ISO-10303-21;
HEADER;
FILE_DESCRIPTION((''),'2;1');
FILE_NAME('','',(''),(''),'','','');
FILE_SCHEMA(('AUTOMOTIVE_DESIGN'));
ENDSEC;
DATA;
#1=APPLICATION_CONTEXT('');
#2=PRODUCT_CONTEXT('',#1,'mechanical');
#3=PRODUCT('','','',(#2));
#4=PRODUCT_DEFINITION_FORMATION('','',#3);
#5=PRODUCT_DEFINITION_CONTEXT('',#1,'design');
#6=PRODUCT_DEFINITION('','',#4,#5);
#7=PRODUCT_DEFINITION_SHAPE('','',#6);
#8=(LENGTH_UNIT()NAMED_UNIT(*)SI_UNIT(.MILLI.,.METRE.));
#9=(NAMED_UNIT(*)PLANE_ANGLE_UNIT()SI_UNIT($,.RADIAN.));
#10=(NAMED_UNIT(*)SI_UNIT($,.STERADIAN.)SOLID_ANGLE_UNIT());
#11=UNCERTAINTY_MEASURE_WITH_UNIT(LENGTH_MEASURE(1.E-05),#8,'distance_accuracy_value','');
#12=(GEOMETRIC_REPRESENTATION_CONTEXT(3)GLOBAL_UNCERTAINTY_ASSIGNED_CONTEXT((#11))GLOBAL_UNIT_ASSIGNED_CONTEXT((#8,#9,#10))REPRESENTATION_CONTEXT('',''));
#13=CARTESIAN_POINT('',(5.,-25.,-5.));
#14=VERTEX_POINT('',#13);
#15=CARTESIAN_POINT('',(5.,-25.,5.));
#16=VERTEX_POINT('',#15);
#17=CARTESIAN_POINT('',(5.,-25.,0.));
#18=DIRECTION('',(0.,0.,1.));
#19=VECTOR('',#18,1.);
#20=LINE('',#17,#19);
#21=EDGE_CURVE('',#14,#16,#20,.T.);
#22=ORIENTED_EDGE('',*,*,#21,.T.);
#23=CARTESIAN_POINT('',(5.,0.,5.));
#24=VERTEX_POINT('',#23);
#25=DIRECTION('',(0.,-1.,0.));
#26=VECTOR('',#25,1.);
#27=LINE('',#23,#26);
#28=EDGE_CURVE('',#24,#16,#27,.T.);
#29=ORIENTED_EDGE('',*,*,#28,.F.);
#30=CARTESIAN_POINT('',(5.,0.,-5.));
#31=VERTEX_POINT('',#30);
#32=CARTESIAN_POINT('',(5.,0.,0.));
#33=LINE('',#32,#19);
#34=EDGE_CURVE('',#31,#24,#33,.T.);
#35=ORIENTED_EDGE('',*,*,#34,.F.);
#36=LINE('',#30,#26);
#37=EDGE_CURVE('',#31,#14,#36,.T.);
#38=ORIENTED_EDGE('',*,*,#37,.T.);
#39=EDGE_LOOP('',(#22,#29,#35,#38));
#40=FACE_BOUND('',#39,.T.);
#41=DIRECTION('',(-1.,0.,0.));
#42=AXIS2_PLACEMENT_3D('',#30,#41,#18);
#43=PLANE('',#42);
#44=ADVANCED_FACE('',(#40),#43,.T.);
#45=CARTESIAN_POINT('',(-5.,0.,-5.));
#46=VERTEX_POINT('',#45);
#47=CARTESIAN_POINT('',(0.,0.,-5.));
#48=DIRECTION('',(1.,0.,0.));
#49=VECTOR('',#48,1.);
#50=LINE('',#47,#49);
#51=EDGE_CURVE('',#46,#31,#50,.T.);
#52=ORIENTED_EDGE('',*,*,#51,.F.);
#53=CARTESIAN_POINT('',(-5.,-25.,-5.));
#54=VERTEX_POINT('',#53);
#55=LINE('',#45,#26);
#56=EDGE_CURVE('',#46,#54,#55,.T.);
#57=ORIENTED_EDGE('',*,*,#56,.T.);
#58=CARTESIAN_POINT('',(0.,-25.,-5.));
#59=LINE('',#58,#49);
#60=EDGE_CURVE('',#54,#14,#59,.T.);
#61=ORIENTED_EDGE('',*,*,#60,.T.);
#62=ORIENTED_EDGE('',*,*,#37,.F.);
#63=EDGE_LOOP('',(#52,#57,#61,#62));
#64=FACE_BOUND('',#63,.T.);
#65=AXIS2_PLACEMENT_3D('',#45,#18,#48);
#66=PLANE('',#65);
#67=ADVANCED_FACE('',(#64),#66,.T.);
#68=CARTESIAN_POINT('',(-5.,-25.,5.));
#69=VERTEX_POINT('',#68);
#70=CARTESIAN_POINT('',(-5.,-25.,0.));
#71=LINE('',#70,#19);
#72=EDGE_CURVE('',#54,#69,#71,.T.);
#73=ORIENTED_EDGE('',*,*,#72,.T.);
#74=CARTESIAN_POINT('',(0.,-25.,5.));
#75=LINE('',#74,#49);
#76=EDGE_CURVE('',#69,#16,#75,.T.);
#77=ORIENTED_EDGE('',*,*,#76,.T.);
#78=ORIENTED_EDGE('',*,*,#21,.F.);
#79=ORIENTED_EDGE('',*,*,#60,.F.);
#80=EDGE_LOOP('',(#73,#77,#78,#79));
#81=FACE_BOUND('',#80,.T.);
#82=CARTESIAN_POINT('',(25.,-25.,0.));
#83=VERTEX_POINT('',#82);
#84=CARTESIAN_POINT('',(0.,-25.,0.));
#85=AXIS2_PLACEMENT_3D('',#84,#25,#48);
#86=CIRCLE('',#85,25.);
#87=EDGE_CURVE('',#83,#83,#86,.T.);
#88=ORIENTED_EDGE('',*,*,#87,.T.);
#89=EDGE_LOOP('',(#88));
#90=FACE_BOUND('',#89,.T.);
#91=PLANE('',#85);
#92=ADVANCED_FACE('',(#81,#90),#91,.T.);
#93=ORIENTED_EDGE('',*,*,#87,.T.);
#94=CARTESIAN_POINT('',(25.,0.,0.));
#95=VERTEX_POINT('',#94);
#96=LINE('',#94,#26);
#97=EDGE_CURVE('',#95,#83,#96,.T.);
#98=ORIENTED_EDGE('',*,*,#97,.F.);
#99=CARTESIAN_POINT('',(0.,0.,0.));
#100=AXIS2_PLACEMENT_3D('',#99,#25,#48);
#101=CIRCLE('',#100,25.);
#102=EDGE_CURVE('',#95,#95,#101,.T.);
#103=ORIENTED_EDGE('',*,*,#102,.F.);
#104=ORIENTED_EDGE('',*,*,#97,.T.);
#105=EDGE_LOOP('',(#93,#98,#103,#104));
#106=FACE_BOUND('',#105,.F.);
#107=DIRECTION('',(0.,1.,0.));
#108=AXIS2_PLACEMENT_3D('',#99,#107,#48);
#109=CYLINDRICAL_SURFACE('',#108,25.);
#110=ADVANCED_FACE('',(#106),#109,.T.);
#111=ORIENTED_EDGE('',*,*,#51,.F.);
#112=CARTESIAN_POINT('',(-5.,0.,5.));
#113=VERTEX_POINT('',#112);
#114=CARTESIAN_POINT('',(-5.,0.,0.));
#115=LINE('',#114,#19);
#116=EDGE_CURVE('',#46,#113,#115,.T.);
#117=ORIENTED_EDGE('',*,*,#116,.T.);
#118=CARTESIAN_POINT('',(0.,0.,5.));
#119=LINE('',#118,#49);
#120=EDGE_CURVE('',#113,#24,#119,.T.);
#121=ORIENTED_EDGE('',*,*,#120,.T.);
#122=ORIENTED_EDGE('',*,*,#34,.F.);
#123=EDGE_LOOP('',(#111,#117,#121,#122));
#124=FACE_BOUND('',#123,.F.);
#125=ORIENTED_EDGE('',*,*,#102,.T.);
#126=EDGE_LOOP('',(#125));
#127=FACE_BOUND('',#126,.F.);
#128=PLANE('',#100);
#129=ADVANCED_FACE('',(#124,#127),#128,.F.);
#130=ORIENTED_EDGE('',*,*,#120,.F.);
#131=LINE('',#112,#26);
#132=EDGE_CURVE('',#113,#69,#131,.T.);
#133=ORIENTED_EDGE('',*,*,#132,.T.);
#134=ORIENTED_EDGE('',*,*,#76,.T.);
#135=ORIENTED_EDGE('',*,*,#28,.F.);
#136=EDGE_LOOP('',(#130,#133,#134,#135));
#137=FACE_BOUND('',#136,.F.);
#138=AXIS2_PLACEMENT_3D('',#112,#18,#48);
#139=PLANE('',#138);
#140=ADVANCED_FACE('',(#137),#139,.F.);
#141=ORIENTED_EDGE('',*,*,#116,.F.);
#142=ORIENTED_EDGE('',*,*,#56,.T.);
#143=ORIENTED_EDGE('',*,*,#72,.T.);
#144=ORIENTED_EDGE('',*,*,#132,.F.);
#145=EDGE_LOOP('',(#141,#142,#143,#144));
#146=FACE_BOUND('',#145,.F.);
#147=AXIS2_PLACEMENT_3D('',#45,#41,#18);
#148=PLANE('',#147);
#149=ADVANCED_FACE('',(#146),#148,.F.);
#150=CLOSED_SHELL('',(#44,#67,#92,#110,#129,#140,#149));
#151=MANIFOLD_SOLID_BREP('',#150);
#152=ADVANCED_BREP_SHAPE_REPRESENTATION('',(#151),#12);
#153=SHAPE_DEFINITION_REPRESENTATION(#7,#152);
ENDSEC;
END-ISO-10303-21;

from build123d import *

# Parameters (mm, degrees)
F0_R     = 25
F0_W     = 10
F0_H     = 10
F2_DEPTH = 25


# Not quite as in the source:
# - the program builds the solid bodies; features that only make, move or delete a surface that nothing else refers to are left out


with BuildPart() as f2:
    # F0 (on Front) → F2 (new body)
    with BuildSketch(Plane.XZ):
        Circle(F0_R)
        Rectangle(F0_W, F0_H, mode=Mode.SUBTRACT)
    extrude(amount=F2_DEPTH)


solid = f2.part
